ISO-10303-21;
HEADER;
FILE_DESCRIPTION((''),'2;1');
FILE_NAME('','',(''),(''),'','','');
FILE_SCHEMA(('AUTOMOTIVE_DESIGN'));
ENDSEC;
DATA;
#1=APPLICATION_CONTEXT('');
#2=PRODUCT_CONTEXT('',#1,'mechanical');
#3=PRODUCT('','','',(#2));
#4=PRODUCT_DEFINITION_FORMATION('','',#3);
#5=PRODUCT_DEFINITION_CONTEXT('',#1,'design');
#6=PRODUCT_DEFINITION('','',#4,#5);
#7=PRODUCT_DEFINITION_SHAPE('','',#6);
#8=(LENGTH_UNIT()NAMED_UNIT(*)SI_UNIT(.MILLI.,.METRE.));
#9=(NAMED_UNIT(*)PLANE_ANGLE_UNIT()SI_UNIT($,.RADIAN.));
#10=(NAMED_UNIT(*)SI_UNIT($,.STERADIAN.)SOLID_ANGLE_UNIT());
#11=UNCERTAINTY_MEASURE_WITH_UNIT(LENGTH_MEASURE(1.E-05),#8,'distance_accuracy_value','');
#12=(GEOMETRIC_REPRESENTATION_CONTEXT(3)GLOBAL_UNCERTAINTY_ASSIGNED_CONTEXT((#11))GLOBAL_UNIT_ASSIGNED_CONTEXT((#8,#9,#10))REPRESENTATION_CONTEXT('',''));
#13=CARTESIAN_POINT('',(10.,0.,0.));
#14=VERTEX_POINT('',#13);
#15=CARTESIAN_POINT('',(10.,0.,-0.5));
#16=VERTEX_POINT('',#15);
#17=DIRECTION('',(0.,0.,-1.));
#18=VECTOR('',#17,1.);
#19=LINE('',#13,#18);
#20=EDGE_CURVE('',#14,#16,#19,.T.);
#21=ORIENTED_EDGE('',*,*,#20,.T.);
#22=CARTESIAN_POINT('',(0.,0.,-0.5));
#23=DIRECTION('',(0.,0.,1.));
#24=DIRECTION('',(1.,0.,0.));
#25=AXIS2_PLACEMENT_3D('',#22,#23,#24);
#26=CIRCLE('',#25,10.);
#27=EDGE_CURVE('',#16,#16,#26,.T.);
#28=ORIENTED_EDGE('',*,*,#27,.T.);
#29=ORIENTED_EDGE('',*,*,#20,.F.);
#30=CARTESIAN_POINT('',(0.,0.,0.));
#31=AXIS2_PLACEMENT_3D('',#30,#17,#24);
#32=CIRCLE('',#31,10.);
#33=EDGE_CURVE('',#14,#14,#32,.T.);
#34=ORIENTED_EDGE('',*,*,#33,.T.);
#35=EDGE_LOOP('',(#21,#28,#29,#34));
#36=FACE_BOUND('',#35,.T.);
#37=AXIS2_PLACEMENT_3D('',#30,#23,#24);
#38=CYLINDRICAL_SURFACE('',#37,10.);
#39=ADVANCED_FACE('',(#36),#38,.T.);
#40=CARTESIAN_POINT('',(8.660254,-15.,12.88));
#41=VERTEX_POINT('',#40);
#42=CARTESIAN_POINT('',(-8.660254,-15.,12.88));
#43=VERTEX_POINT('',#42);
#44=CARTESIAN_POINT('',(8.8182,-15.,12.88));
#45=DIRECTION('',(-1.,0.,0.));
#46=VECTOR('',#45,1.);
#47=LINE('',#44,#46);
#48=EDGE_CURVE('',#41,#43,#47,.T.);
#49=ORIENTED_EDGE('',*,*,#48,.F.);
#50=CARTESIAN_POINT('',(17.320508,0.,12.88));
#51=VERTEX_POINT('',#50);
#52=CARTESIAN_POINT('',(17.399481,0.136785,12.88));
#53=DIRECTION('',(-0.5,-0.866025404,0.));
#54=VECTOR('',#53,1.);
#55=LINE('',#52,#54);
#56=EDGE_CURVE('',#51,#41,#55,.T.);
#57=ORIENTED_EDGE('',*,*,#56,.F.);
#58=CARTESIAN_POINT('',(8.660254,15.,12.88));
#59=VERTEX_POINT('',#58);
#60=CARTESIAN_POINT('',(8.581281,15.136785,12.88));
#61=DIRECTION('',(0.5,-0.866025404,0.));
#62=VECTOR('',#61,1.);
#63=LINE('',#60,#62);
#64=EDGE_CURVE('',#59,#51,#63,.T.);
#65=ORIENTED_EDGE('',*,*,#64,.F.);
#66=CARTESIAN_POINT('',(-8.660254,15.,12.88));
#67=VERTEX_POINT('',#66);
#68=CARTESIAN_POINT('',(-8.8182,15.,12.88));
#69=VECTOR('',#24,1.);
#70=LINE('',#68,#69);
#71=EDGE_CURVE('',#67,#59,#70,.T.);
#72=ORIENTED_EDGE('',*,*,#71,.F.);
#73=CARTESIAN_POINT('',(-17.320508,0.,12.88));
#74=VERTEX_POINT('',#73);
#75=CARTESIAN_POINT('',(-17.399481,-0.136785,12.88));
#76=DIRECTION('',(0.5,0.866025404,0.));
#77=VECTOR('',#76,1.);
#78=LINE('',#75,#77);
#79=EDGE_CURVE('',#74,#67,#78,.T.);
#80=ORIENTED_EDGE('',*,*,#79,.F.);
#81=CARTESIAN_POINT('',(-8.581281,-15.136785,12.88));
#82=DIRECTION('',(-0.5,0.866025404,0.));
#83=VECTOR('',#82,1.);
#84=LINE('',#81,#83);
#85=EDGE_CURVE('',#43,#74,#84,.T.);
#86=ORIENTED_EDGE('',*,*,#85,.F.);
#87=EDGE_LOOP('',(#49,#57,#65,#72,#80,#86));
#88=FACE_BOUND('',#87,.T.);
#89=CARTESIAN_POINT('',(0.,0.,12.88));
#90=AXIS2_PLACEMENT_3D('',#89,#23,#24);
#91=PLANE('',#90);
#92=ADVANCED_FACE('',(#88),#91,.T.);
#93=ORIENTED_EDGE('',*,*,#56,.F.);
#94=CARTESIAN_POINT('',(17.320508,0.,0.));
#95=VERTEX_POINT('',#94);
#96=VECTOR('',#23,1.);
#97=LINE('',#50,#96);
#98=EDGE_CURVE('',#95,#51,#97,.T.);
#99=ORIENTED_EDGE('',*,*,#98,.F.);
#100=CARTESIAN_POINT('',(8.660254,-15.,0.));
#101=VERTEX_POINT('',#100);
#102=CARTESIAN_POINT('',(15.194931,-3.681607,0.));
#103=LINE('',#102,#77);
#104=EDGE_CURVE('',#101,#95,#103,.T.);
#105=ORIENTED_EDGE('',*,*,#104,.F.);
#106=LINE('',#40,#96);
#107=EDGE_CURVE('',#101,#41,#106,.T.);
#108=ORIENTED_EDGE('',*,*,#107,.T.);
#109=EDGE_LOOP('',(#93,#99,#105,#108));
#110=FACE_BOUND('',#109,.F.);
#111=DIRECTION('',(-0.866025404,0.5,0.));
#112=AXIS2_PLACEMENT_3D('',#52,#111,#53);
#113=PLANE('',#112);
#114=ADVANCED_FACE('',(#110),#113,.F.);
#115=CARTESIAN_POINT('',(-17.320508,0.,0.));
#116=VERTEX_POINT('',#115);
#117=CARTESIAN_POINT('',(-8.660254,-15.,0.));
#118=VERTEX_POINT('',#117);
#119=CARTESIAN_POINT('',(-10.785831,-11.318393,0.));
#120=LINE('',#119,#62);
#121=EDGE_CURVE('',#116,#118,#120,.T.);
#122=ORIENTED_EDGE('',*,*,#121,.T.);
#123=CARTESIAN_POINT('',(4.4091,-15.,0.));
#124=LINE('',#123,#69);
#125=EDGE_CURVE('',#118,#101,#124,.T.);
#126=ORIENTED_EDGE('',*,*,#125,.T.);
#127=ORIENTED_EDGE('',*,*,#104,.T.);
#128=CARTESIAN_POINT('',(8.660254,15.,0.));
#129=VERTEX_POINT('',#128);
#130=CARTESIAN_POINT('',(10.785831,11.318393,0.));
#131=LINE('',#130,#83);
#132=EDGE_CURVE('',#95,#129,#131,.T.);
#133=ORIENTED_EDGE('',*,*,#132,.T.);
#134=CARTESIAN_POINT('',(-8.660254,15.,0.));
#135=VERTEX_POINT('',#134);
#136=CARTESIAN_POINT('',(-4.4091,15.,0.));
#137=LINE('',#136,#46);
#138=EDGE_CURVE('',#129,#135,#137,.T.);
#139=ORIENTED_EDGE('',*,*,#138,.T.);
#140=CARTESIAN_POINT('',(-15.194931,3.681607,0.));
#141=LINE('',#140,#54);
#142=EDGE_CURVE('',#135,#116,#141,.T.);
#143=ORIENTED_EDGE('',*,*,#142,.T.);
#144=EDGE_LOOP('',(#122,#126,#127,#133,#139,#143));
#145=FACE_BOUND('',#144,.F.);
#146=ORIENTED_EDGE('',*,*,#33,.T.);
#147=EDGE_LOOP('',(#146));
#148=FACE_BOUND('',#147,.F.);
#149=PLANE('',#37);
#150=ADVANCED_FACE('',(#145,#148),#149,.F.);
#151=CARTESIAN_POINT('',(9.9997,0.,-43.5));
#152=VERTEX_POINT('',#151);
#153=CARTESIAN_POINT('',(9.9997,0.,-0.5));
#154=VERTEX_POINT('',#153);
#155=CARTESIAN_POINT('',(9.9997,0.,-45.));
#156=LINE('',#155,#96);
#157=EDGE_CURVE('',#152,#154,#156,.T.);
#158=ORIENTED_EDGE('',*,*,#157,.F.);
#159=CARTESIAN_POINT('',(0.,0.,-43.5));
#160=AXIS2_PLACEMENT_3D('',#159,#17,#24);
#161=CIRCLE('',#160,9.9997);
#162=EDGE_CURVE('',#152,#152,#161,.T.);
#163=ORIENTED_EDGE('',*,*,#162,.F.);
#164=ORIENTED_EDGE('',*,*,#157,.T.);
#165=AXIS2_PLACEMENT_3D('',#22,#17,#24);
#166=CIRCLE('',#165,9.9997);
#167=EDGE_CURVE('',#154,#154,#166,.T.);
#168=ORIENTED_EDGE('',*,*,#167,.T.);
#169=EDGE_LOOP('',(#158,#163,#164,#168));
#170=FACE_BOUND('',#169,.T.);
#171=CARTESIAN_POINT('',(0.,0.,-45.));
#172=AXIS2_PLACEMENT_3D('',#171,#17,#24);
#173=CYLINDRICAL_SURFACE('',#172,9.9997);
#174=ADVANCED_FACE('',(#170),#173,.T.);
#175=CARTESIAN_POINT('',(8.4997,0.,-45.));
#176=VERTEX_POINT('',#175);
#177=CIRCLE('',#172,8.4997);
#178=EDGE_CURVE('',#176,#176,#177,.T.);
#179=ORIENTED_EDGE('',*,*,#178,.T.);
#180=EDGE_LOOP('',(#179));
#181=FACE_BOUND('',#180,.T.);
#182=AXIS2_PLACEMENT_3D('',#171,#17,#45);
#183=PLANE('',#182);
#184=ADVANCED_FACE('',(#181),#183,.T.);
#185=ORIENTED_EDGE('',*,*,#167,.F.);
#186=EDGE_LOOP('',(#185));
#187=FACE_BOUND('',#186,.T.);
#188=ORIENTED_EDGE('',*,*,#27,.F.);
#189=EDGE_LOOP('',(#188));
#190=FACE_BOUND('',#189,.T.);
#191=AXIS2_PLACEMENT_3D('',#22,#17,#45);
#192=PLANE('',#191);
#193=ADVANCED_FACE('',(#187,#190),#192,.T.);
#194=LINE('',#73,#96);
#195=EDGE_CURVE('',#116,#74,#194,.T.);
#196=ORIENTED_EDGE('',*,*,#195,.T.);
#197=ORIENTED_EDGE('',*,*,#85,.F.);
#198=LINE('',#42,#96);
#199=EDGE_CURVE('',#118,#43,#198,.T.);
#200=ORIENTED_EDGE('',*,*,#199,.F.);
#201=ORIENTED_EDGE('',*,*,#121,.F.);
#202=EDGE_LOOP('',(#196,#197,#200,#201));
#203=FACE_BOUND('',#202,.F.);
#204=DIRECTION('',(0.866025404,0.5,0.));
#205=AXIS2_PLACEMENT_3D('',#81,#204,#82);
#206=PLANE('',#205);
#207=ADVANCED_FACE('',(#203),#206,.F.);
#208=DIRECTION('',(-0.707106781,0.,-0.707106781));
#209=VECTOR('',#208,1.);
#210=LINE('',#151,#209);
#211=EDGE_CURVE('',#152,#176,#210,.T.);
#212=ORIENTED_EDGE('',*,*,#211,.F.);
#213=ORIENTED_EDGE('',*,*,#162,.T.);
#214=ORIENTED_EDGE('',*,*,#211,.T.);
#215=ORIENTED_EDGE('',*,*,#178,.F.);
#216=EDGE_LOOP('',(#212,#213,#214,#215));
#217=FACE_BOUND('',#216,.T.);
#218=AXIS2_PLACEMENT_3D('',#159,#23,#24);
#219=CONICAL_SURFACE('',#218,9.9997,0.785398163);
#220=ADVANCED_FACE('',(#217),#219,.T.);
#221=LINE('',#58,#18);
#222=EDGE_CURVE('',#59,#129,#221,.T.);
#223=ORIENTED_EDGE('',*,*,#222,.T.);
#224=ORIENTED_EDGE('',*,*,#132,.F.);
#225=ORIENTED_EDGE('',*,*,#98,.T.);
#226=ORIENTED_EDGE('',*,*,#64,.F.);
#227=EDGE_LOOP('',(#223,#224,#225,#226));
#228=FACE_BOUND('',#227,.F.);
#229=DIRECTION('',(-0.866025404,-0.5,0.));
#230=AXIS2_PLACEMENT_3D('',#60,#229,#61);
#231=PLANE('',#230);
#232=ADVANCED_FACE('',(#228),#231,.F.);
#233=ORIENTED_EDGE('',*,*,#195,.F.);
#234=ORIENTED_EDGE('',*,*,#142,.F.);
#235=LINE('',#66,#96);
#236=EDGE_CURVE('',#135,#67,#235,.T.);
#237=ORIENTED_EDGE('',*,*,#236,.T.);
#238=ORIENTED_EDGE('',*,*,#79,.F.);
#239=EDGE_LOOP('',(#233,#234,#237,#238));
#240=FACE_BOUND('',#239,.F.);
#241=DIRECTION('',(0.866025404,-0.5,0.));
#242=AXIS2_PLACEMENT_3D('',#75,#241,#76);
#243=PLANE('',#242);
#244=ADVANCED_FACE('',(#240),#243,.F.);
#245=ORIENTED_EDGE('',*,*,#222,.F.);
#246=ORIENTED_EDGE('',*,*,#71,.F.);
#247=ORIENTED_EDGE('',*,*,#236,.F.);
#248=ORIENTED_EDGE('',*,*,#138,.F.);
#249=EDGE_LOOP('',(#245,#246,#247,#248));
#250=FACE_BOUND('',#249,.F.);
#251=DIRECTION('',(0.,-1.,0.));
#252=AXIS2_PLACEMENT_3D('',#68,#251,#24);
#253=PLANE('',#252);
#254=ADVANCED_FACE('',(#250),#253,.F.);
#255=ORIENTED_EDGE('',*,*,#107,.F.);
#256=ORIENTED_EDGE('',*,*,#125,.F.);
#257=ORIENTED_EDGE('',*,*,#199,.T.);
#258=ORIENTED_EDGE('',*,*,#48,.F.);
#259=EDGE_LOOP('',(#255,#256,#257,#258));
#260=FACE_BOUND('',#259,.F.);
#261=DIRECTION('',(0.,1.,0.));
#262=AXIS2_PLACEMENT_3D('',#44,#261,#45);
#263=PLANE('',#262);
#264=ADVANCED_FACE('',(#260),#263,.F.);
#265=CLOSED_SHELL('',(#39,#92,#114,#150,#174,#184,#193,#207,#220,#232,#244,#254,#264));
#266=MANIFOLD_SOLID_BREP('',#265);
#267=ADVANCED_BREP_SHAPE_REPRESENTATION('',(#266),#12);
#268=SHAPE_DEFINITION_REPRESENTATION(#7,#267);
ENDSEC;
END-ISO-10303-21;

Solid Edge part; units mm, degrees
sketch "Sketch1" plane through (0, 0, 0) normal (0, 0, 1) x (1, 0, 0)
  circle A0 centre (0, 0) radius 17.4
  dimension "D1" = 34.8
extrude "Protrusion1" add sketch "Sketch1" along normal blind 12.88
sketch "Sketch2" plane through (0, 0, 0) normal (0, 0, -1) x (1, 0, 0)
  circle A0 centre (0, 0) radius 10
extrude "Protrusion2" add sketch "Sketch2" along normal blind 45
sketch "Sketch3" plane through (0, 0, -45) normal (0, 0, -1) x (1, 0, 0)
  circle A0 centre (0, 0) radius 9.9997
extrude "Cutout1" cut sketch "Sketch3" against normal blind 44.5 flip side to cut
chamfer "Chamfer_1" distance 1.5 angle 45 1 edges at (-9.9997, 0, -45)
sketch "Sketch4" plane through (0, 0, 12.88) normal (0, 0, 1) x (1, 0, 0)
  line L0 (-8.8182, 15) -> (8.8182, 15)
  dimension "D1" = 30
extrude "Cutout2" cut sketch "Sketch4" against normal up to next material side at (0, 15.05, 12.88)
pattern_circular "Pattern1" count 6 over 360 about axis through (0, 0, 12.88) along (0, 0, 1) of "Cutout2"
properties part number "200082"
